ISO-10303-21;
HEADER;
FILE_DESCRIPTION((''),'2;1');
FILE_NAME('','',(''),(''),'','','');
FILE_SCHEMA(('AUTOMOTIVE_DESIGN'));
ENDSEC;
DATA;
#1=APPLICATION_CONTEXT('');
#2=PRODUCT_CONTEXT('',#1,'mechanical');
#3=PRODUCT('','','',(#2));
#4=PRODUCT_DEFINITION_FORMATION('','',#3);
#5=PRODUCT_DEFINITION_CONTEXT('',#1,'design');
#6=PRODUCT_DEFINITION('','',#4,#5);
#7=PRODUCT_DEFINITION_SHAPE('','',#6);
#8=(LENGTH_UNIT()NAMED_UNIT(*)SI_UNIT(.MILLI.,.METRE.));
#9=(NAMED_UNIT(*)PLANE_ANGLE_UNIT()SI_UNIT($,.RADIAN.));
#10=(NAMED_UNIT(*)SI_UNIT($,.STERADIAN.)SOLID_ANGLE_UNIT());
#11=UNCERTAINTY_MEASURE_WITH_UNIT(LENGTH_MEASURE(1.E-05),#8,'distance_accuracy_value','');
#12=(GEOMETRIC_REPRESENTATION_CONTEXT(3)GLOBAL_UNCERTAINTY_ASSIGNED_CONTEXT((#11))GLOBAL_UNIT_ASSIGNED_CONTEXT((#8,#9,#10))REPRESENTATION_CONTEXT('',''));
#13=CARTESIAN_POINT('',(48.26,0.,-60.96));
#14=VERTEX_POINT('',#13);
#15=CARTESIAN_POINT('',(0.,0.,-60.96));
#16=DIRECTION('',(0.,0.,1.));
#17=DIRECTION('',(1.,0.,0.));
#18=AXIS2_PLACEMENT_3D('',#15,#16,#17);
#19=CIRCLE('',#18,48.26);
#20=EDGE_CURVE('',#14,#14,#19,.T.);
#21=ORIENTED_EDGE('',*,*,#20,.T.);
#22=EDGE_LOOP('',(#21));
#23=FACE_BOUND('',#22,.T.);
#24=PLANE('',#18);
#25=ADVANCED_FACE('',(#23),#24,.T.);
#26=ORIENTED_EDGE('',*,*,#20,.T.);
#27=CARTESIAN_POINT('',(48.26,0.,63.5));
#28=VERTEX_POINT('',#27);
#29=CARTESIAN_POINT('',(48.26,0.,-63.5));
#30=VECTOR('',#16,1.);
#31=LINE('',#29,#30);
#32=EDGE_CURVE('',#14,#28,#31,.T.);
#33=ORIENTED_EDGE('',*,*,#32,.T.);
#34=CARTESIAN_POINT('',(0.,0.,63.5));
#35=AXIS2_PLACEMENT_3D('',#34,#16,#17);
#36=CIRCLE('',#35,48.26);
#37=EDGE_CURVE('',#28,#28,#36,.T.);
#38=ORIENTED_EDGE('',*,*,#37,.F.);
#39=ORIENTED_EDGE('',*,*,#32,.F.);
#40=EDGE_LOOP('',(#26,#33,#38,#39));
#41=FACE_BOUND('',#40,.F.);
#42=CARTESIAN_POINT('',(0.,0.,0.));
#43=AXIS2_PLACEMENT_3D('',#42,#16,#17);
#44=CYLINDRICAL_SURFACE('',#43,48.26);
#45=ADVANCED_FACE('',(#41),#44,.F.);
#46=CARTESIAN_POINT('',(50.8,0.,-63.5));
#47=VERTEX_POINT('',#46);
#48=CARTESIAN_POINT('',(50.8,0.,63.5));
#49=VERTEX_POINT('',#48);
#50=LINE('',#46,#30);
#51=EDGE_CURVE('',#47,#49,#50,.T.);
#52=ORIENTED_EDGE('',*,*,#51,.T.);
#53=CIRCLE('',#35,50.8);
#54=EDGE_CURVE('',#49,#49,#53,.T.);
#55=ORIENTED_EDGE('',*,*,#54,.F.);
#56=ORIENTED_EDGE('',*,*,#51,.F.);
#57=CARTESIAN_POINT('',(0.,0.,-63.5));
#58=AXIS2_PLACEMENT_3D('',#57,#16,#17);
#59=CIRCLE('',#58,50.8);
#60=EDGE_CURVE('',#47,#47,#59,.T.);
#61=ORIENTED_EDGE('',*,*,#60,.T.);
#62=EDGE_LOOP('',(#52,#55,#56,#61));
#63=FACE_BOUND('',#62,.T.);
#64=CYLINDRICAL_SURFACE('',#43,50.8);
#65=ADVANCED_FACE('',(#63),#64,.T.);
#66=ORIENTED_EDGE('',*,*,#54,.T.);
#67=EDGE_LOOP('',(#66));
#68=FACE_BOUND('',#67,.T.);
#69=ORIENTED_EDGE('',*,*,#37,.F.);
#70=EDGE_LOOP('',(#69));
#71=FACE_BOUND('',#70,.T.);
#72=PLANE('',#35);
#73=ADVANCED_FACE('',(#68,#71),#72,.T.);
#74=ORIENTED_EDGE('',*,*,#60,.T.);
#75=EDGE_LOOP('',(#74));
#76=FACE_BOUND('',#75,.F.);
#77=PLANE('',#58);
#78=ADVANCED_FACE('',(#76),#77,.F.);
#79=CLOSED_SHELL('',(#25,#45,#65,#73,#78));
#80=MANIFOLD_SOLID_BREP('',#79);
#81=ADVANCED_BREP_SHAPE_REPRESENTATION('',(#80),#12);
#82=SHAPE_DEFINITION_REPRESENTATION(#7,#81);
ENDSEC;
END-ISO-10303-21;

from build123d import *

# Parameters (mm, degrees)
F0_R     = 50.8
F1_DEPTH = 63.5
F2_T     = -2.54


# Not quite as in the source:
# - the program builds the solid bodies; features that only make, move or delete a surface that nothing else refers to are left out


with BuildPart() as f1:
    # F0 (on Top) → F1 (new body, symmetric)
    with BuildSketch(Plane.XY):
        Circle(F0_R)
    extrude(amount=F1_DEPTH, both=True)

    # F2
    f2_openings = [f1.faces().sort_by_distance(p)[0] for p in [
        (0, 0, 63.5),
    ]]
    offset(amount=F2_T, openings=f2_openings)


solid = f1.part
